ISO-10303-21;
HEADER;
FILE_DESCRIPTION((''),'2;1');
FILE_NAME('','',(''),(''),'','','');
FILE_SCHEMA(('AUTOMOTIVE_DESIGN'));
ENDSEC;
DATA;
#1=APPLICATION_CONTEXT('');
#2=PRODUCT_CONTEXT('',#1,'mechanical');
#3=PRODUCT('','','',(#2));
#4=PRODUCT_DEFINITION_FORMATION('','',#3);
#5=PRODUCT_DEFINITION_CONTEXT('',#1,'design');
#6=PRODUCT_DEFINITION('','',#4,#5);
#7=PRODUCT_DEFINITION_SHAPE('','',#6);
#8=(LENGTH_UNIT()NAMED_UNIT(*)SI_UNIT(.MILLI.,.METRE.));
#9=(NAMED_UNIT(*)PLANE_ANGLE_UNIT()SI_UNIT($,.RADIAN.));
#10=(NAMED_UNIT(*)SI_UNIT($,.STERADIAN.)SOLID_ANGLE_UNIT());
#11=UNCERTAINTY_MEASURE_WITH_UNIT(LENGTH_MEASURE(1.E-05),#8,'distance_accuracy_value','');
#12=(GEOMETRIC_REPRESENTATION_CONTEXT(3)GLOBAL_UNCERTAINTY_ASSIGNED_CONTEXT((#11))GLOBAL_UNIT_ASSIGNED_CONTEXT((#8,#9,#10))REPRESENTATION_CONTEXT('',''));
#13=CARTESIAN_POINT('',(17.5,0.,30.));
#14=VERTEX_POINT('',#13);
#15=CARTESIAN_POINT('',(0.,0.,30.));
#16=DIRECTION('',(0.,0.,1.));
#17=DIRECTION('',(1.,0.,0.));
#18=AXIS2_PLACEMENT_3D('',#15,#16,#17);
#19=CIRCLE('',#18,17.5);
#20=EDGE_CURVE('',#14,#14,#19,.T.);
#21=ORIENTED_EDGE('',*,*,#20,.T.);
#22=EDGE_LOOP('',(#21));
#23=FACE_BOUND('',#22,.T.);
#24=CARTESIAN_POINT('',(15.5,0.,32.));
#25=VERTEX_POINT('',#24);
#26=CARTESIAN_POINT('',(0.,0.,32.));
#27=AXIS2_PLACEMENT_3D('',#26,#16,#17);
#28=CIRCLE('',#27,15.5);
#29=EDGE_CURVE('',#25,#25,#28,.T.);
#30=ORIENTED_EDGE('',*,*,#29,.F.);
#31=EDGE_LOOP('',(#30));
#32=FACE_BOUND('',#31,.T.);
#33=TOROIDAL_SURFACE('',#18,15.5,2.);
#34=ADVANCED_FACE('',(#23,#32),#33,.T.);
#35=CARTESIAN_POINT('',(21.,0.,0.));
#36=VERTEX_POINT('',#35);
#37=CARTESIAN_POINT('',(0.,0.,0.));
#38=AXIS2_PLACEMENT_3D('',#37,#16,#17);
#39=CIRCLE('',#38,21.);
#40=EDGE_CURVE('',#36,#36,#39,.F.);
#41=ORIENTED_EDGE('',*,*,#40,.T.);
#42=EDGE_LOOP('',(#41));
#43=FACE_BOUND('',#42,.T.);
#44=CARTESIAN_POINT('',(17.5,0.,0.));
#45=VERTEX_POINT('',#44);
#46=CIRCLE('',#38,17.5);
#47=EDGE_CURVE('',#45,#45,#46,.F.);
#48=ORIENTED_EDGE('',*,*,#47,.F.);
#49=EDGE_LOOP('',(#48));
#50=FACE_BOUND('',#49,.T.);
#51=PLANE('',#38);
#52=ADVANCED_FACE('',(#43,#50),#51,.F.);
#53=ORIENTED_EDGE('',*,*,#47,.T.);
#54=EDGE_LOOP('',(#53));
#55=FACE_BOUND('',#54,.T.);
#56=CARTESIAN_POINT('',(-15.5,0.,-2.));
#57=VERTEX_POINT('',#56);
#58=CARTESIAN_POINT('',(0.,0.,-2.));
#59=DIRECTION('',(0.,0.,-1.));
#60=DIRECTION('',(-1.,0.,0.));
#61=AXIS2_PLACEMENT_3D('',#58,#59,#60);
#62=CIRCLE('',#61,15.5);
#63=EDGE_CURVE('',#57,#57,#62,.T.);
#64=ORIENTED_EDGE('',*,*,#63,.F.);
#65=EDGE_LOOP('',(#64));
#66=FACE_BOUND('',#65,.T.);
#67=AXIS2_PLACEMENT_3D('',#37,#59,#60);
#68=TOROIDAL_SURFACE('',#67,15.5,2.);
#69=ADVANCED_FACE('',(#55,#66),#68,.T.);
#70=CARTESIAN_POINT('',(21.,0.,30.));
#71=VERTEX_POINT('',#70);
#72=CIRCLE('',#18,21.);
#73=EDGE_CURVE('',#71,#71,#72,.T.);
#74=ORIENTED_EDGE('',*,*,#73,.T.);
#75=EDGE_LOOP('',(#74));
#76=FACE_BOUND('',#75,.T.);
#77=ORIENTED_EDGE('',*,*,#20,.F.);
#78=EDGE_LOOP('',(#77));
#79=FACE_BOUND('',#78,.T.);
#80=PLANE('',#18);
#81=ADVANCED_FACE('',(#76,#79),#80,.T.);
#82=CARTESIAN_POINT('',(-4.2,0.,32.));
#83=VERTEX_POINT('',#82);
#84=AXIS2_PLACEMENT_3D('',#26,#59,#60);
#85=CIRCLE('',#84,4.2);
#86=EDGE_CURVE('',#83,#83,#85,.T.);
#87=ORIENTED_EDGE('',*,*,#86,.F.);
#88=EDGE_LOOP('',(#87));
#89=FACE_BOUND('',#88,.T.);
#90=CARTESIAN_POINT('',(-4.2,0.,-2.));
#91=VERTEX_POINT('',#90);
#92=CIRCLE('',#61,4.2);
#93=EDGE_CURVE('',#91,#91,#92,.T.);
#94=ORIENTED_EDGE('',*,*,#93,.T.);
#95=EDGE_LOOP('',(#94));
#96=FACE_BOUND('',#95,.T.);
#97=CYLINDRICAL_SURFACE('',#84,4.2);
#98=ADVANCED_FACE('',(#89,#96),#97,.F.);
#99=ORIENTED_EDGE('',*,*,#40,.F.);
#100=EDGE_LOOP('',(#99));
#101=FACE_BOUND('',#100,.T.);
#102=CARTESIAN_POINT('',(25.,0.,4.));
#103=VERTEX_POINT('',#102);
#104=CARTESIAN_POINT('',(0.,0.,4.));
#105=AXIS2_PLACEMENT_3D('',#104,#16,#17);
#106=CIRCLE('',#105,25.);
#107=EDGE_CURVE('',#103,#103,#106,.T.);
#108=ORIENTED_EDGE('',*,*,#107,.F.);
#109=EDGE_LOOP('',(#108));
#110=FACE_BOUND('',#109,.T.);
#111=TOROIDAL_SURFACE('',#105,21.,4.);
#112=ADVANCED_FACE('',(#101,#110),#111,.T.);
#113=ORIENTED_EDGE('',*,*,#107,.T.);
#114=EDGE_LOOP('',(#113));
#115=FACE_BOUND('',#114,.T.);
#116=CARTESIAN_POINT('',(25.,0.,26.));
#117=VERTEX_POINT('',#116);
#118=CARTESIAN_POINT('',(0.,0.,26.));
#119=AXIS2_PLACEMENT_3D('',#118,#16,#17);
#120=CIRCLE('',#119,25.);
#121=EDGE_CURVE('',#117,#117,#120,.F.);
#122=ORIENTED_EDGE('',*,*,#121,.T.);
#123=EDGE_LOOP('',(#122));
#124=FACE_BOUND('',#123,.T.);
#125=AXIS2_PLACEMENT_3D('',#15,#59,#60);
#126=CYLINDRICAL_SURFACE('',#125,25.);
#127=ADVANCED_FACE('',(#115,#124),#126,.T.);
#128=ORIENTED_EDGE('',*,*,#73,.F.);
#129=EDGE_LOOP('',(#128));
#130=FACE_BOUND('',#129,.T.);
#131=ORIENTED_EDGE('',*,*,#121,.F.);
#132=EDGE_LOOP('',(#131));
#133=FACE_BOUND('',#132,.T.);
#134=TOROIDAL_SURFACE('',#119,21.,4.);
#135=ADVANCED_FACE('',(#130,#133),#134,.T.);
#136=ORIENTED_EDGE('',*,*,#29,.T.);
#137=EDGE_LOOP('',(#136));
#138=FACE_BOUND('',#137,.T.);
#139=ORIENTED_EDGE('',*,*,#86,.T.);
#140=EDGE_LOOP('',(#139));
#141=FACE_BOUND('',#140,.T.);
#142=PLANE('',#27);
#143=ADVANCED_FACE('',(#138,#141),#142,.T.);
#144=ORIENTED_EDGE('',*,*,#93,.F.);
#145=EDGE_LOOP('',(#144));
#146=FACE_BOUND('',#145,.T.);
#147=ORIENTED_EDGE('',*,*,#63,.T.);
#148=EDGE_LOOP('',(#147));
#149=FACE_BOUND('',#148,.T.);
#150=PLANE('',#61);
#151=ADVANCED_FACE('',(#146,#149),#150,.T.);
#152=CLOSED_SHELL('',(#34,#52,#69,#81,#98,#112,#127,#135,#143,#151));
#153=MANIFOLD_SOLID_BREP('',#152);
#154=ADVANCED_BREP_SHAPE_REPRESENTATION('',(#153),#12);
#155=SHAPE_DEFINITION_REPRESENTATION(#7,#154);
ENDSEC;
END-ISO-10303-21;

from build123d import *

# Parameters (mm, degrees)
SKETCH_1_R          = 25
EXTRUDE_1_DEPTH     = 30
FILLET_1_R          = 4
FILLET_2_R          = 4
SKETCH_2_R          = 17.5
EXTRUDE_2_DEPTH     = 2
FILLET_3_R          = 2
EXTRUDE_START       = 2
SKETCH_3_R          = 17.5
EXTRUDE_3_DEPTH     = 2
FILLET_4_R          = 2
SKETCH_4_R          = 4.2
CUT_EXTRUDE_1_DEPTH = 50.050993874


with BuildPart() as part:
    # 草图1 → 凸台-拉伸1 (new body)
    with BuildSketch(Plane.XY):
        Circle(SKETCH_1_R)
    extrude(amount=EXTRUDE_1_DEPTH)

    # 圆角1
    fillet_1_edges = [part.edges().sort_by_distance(p)[0] for p in [
        (-25, 0, 30),
    ]]
    fillet(fillet_1_edges, radius=FILLET_1_R)

    # 圆角2
    fillet_2_edges = [part.edges().sort_by_distance(p)[0] for p in [
        (-25, 0, 0),
    ]]
    fillet(fillet_2_edges, radius=FILLET_2_R)

    # 草图2 → 凸台-拉伸2 (add)
    with BuildSketch(Plane.XY.offset(30)):
        Circle(SKETCH_2_R)
    extrude(amount=EXTRUDE_2_DEPTH)

    # 圆角3
    fillet_3_edges = [part.edges().sort_by_distance(p)[0] for p in [
        (-17.5, 0, 32),
    ]]
    fillet(fillet_3_edges, radius=FILLET_3_R - 0.0001)  # a hair under: the kernel refuses the full size

    # 草图3 → 凸台-拉伸3 (add)
    with BuildSketch(Plane(origin=(0, 0, 0), x_dir=(-1, 0, 0), z_dir=(0, 0, -1)).offset(EXTRUDE_START)):
        with Locations(Location((0, 0, 0), (0, 0, 180))):
            Circle(SKETCH_3_R)
    extrude(amount=-EXTRUDE_3_DEPTH)

    # 圆角4
    fillet_4_edges = [part.edges().sort_by_distance(p)[0] for p in [
        (-17.5, 0, -2),
    ]]
    fillet(fillet_4_edges, radius=FILLET_4_R - 0.0001)  # a hair under: the kernel refuses the full size

    # 草图4 → 切除-拉伸1 (cut, through all)
    with BuildSketch(Plane(origin=(0, 0, -2), x_dir=(-1, 0, 0), z_dir=(0, 0, -1))):
        Circle(SKETCH_4_R)
    extrude(amount=-CUT_EXTRUDE_1_DEPTH, mode=Mode.SUBTRACT)


solid = part.part
